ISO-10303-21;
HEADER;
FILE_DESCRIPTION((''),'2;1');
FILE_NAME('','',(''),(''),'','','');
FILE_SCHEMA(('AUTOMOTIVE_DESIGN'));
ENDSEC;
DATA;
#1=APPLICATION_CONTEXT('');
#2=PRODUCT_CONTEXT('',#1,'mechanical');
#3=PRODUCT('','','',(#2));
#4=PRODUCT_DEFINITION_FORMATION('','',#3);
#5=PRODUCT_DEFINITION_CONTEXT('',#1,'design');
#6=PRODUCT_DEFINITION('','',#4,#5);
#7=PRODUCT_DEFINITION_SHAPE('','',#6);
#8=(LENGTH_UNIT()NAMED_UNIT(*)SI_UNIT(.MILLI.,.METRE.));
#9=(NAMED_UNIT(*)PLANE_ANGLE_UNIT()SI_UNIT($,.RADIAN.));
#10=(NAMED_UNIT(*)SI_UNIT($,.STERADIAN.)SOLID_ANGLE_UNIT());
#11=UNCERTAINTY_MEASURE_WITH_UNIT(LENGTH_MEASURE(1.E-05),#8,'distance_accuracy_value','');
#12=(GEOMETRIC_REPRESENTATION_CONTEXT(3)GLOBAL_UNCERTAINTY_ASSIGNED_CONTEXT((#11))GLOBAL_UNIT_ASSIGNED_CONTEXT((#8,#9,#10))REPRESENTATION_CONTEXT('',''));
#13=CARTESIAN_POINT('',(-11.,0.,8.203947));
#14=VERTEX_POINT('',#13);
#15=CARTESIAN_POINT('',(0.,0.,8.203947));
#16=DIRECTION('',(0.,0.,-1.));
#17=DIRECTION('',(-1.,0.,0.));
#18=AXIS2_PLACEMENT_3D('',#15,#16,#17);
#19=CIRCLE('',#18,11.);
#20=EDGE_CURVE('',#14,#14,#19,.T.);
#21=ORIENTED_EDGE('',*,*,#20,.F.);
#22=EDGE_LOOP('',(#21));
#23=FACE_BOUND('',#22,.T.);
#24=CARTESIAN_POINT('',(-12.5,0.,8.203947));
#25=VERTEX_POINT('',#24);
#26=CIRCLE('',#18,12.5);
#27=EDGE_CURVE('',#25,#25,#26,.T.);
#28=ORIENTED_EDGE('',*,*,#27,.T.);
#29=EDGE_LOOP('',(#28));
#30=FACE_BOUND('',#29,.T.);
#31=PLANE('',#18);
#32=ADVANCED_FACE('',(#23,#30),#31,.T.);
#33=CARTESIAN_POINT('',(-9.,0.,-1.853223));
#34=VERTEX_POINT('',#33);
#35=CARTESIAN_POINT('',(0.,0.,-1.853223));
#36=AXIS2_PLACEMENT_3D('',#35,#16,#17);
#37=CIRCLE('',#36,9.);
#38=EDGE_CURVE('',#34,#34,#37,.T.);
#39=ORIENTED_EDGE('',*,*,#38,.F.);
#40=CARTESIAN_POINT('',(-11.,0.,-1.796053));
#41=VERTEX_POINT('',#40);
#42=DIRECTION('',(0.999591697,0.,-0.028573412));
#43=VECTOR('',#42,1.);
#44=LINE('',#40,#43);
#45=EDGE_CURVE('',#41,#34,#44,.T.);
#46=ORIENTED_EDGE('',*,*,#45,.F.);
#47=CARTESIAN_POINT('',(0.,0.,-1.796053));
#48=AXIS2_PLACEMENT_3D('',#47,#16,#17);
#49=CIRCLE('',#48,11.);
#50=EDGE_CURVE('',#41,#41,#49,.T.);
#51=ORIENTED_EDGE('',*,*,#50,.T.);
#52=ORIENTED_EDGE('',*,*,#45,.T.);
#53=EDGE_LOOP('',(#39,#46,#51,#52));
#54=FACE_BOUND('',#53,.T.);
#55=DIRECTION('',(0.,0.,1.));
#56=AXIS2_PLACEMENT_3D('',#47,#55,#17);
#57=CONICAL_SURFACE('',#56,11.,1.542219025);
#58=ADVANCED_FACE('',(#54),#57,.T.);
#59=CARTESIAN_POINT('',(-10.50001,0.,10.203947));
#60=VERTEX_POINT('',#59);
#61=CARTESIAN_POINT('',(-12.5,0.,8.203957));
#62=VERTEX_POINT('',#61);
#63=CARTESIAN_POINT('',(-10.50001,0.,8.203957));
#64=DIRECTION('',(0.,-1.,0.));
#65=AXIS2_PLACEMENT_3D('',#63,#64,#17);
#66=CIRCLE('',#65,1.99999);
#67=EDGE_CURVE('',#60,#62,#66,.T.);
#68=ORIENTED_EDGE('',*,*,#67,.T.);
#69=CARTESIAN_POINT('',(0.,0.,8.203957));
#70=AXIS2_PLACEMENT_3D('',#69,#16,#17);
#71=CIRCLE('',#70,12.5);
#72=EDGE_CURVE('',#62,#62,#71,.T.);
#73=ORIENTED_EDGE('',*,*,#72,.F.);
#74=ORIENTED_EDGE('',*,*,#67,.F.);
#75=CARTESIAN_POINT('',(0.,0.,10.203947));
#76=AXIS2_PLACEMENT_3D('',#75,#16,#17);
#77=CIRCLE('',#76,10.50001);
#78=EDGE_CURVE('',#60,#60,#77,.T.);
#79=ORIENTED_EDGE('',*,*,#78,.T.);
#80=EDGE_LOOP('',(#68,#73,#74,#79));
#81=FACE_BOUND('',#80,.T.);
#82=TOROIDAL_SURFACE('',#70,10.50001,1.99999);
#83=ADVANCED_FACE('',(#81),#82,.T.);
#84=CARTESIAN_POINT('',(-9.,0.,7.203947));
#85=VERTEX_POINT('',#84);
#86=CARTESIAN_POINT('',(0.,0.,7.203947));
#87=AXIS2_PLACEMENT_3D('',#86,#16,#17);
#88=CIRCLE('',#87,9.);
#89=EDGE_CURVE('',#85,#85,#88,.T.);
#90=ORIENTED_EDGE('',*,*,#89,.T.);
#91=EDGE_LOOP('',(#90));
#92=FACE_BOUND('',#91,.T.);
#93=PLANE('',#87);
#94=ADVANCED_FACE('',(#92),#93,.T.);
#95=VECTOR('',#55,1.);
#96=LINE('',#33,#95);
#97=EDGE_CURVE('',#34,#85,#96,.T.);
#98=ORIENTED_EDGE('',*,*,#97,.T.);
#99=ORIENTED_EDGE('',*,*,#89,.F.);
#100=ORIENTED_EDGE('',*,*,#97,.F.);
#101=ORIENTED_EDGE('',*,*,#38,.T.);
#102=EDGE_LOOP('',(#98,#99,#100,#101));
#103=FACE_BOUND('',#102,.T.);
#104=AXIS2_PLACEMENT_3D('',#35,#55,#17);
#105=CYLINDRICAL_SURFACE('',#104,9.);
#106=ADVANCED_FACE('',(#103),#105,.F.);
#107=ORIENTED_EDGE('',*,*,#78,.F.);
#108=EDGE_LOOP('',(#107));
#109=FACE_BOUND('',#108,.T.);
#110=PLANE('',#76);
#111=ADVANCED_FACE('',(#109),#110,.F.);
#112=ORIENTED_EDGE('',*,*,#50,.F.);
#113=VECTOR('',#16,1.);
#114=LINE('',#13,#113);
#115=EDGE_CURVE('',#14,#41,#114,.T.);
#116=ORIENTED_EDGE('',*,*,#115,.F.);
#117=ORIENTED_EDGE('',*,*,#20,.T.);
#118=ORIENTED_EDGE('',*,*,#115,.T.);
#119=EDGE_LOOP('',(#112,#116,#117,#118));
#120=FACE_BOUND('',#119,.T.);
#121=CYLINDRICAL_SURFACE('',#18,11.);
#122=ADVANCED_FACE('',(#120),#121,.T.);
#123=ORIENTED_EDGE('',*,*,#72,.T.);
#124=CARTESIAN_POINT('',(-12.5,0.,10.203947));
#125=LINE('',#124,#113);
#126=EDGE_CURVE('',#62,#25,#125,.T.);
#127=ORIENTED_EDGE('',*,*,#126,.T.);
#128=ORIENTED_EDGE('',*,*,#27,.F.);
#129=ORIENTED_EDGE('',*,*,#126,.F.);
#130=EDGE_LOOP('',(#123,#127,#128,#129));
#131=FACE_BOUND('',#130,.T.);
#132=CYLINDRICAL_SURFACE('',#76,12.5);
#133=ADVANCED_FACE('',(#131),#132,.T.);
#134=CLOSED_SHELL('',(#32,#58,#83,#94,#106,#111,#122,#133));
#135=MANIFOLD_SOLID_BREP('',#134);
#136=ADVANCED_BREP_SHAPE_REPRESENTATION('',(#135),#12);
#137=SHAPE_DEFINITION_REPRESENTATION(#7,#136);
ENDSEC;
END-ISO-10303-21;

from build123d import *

# Parameters (mm, degrees)
F2_R = 1.99999


# Not quite as in the source:
# - a fillet or chamfer is up to 0.001 mm smaller than in the source, because OpenCascade refuses the exact size


with BuildPart() as f1:
    # F0 (on Front) → F1 (revolve)
    with BuildSketch(Plane.XZ):
        Polygon((0, 7.2039468596), (0, 10.2039468596), (-12.5, 10.2039468596), (-12.5, 8.2039468596), (-11, 8.2039468596), (-11, -1.7960531404), (-9, -1.853223308), (-9, 7.2039468596), align=None)
    revolve(axis=Axis((0, 0, 8.7039468596), (0, 0, -1)))

    # F2 (radius 2 in the source; OpenCascade refuses exactly that, so slightly less here)
    f2_edges = [f1.edges().sort_by_distance(p)[0] for p in [
        (12.5, 0, 10.203947),
    ]]
    fillet(f2_edges, radius=F2_R)


solid = f1.part
